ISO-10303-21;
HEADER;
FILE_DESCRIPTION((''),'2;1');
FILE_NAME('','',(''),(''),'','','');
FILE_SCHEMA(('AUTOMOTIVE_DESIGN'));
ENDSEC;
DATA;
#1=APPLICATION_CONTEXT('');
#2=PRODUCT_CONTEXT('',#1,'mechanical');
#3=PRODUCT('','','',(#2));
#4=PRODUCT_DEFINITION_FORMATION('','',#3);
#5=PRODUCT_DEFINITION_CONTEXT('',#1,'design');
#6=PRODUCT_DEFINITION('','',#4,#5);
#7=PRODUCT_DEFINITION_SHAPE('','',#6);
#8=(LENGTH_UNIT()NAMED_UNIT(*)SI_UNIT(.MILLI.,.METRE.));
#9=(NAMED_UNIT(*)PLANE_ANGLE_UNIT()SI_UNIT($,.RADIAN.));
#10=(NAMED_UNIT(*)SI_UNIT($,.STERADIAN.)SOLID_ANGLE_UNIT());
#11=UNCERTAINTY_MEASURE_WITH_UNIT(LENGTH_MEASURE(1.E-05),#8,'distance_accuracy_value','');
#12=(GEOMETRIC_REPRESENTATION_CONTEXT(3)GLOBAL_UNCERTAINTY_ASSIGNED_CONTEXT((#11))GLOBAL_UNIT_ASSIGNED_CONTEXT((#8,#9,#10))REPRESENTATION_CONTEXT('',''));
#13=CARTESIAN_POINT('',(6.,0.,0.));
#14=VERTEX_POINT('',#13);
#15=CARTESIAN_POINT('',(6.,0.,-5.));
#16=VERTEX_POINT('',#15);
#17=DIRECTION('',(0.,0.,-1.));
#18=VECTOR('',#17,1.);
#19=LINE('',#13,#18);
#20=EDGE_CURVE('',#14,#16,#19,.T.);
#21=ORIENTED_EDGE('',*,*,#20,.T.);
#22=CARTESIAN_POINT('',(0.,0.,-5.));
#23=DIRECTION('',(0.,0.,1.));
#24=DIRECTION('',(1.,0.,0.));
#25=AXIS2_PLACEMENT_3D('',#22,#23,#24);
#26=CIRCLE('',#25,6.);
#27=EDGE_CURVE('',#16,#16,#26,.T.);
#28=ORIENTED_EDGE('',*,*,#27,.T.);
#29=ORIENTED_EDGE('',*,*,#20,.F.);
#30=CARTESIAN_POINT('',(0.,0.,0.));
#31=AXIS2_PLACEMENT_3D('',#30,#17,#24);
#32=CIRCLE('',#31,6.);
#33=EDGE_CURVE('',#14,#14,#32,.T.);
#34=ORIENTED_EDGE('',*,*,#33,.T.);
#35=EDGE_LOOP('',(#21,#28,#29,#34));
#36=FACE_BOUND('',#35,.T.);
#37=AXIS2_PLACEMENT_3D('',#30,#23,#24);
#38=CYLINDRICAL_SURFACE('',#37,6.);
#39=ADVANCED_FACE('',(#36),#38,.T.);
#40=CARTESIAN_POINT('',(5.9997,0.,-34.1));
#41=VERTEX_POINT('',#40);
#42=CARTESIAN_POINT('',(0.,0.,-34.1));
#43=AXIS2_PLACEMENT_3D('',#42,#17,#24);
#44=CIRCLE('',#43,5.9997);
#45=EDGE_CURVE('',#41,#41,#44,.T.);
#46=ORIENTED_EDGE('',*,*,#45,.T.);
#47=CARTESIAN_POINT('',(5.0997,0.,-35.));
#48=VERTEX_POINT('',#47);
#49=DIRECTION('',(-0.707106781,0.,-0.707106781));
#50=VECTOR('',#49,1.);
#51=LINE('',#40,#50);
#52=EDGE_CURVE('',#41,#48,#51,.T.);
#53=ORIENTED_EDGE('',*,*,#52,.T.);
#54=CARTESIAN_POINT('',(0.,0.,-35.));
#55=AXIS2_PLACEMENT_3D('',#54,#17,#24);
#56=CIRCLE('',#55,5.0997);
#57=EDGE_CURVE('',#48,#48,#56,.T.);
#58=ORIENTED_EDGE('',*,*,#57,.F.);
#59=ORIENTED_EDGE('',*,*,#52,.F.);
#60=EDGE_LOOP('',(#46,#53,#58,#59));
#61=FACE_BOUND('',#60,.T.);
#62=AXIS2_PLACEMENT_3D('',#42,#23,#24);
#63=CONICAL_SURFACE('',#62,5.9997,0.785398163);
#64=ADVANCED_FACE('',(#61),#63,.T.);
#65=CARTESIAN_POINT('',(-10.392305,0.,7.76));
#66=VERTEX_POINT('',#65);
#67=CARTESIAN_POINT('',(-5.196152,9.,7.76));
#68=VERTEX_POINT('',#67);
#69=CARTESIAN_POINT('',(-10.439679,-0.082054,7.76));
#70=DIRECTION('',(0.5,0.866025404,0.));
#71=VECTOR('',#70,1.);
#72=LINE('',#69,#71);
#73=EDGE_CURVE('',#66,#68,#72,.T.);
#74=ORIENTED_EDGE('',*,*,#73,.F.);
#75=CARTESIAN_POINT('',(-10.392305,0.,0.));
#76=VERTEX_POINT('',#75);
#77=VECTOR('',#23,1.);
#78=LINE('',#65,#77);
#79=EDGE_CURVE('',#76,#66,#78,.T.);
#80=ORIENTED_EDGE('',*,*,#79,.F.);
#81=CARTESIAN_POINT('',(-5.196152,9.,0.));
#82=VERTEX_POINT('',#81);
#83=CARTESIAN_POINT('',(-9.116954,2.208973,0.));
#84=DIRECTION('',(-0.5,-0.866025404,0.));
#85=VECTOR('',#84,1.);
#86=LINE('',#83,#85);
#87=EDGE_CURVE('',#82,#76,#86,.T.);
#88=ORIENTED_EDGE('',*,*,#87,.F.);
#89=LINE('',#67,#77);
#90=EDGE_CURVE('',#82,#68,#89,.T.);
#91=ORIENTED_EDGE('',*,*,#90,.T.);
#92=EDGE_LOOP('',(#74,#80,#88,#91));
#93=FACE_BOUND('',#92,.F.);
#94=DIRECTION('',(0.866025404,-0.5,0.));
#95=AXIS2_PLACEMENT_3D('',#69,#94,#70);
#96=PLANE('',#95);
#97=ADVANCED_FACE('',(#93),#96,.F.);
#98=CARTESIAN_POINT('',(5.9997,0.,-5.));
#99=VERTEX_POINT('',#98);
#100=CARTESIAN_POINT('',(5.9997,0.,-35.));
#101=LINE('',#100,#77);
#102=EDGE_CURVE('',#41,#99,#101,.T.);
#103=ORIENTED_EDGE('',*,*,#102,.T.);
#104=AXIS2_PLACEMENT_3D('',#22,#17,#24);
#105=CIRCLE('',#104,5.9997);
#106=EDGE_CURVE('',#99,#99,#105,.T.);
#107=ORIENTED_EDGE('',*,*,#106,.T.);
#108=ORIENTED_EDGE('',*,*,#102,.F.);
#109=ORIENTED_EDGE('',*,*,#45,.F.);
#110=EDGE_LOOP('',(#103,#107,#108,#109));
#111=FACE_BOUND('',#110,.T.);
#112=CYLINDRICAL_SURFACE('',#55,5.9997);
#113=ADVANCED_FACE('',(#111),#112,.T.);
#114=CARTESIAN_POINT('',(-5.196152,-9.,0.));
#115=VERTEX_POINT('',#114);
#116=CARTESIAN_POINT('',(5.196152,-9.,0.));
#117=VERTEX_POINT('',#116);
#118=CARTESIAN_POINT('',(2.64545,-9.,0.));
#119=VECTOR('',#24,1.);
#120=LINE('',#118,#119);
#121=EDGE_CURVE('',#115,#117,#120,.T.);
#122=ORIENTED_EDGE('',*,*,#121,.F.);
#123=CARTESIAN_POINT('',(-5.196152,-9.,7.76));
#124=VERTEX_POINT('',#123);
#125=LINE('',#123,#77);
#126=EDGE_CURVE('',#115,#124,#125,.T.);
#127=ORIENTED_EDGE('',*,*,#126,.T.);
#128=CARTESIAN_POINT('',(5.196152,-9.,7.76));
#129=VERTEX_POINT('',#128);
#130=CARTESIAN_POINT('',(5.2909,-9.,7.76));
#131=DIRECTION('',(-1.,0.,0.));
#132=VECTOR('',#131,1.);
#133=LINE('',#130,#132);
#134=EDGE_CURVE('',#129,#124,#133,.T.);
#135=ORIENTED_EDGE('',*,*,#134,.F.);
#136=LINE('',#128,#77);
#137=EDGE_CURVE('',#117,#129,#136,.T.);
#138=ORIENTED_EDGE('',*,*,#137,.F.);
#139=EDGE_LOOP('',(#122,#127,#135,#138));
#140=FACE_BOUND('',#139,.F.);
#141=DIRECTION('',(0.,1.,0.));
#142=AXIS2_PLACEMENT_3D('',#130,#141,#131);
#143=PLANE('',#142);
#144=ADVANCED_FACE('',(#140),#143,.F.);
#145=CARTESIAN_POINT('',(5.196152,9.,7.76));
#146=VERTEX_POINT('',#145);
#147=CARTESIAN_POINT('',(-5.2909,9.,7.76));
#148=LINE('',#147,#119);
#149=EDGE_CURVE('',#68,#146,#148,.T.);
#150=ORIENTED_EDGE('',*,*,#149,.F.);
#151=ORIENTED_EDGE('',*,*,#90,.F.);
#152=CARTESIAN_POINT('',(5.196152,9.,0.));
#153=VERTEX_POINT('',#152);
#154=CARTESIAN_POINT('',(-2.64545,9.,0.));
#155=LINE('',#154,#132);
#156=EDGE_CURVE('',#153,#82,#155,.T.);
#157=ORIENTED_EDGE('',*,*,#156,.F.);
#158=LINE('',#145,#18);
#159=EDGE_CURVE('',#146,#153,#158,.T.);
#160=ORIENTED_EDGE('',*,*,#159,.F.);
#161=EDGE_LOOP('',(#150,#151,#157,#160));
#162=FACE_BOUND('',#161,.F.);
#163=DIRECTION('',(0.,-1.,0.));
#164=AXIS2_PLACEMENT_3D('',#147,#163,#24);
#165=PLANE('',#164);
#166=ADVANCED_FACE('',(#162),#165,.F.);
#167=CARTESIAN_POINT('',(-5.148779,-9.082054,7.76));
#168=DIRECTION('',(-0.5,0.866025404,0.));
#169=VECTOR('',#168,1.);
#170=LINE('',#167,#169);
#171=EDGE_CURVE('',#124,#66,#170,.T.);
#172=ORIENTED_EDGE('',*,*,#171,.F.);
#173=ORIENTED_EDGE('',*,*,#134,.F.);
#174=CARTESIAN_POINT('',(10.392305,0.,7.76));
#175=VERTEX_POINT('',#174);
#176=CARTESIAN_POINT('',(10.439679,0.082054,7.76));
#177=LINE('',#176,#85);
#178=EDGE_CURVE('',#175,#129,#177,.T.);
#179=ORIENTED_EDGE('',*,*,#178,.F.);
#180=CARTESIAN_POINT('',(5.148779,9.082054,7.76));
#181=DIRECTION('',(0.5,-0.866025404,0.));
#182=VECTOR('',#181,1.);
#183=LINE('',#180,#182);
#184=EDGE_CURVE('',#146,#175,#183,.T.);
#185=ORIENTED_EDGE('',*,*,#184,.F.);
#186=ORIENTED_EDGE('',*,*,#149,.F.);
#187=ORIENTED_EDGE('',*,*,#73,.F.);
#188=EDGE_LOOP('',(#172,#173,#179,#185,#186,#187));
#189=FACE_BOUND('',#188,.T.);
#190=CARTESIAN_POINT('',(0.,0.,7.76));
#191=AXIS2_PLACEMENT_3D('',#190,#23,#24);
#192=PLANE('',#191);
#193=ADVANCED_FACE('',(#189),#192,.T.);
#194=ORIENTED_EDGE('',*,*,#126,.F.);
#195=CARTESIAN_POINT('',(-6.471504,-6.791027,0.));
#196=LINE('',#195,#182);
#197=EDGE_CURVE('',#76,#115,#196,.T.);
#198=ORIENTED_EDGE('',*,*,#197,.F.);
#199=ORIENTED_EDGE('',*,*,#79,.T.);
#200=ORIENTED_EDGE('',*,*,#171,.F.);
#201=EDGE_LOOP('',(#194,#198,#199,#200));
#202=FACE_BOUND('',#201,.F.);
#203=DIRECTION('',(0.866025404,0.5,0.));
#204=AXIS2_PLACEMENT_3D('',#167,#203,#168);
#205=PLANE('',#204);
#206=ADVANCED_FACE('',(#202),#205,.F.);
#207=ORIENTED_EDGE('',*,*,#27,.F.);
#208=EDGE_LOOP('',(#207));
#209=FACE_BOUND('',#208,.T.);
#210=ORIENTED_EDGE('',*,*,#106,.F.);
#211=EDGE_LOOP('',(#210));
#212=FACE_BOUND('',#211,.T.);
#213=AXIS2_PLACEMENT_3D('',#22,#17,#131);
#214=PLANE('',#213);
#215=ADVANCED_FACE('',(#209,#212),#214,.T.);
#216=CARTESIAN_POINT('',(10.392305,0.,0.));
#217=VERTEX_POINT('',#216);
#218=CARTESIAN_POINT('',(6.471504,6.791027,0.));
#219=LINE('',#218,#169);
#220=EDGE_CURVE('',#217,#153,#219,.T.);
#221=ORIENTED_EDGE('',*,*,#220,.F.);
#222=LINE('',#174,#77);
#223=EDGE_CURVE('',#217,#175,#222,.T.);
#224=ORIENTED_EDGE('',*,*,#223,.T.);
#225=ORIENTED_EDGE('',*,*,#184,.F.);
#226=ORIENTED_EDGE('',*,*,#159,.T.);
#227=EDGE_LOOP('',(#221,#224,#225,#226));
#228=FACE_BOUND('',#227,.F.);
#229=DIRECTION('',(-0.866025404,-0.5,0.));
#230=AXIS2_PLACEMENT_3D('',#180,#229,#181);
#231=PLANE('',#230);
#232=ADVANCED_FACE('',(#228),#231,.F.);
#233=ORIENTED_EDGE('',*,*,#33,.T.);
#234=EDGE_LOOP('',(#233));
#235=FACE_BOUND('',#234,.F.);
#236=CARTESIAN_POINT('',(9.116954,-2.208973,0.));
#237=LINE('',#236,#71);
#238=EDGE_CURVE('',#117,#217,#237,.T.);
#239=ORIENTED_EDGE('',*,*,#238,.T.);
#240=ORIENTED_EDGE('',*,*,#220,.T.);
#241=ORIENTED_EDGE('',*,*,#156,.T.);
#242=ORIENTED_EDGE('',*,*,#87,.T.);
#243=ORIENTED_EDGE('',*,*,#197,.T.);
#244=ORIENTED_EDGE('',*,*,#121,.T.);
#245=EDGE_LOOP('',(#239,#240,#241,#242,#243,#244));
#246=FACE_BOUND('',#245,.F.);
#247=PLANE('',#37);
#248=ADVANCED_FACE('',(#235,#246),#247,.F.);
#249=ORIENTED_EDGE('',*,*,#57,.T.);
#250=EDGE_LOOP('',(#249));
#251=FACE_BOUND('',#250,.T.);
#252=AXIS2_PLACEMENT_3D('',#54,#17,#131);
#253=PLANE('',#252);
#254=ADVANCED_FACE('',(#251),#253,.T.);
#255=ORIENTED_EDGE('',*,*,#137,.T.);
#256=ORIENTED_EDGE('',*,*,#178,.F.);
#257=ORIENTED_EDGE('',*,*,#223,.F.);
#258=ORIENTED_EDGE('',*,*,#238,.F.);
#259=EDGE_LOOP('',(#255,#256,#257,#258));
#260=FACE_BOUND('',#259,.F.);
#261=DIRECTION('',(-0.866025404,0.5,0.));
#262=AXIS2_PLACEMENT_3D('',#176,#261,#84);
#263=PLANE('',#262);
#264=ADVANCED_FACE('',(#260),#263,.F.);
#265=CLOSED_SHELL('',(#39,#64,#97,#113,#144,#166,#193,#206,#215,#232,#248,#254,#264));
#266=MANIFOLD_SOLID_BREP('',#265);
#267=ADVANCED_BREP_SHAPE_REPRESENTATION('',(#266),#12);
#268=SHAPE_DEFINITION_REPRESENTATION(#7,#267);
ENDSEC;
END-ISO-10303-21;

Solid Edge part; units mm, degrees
sketch "Sketch1" plane through (0, 0, 0) normal (0, 0, 1) x (1, 0, 0)
  circle A0 centre (0, 0) radius 10.44
  dimension "D1" = 20.88
extrude "Protrusion1" add sketch "Sketch1" along normal blind 7.76
sketch "Sketch2" plane through (0, 0, 0) normal (0, 0, -1) x (1, 0, 0)
  circle A0 centre (0, 0) radius 6
extrude "Protrusion2" add sketch "Sketch2" along normal blind 35
sketch "Sketch3" plane through (0, 0, -35) normal (0, 0, -1) x (1, 0, 0)
  circle A0 centre (0, 0) radius 5.9997
extrude "Cutout1" cut sketch "Sketch3" against normal blind 30 flip side to cut
chamfer "Chamfer_1" distance 0.9 angle 45 1 edges at (-5.9997, 0, -35)
sketch "Sketch4" plane through (0, 0, 7.76) normal (0, 0, 1) x (1, 0, 0)
  line L0 (-5.2909, 9) -> (5.2909, 9)
  dimension "D1" = 18
extrude "Cutout2" cut sketch "Sketch4" against normal up to next material side at (0, 9.05, 7.76)
pattern_circular "Pattern1" count 6 over 360 about axis through (0, 0, 7.76) along (0, 0, 1) of "Cutout2"
properties part number "118415"
